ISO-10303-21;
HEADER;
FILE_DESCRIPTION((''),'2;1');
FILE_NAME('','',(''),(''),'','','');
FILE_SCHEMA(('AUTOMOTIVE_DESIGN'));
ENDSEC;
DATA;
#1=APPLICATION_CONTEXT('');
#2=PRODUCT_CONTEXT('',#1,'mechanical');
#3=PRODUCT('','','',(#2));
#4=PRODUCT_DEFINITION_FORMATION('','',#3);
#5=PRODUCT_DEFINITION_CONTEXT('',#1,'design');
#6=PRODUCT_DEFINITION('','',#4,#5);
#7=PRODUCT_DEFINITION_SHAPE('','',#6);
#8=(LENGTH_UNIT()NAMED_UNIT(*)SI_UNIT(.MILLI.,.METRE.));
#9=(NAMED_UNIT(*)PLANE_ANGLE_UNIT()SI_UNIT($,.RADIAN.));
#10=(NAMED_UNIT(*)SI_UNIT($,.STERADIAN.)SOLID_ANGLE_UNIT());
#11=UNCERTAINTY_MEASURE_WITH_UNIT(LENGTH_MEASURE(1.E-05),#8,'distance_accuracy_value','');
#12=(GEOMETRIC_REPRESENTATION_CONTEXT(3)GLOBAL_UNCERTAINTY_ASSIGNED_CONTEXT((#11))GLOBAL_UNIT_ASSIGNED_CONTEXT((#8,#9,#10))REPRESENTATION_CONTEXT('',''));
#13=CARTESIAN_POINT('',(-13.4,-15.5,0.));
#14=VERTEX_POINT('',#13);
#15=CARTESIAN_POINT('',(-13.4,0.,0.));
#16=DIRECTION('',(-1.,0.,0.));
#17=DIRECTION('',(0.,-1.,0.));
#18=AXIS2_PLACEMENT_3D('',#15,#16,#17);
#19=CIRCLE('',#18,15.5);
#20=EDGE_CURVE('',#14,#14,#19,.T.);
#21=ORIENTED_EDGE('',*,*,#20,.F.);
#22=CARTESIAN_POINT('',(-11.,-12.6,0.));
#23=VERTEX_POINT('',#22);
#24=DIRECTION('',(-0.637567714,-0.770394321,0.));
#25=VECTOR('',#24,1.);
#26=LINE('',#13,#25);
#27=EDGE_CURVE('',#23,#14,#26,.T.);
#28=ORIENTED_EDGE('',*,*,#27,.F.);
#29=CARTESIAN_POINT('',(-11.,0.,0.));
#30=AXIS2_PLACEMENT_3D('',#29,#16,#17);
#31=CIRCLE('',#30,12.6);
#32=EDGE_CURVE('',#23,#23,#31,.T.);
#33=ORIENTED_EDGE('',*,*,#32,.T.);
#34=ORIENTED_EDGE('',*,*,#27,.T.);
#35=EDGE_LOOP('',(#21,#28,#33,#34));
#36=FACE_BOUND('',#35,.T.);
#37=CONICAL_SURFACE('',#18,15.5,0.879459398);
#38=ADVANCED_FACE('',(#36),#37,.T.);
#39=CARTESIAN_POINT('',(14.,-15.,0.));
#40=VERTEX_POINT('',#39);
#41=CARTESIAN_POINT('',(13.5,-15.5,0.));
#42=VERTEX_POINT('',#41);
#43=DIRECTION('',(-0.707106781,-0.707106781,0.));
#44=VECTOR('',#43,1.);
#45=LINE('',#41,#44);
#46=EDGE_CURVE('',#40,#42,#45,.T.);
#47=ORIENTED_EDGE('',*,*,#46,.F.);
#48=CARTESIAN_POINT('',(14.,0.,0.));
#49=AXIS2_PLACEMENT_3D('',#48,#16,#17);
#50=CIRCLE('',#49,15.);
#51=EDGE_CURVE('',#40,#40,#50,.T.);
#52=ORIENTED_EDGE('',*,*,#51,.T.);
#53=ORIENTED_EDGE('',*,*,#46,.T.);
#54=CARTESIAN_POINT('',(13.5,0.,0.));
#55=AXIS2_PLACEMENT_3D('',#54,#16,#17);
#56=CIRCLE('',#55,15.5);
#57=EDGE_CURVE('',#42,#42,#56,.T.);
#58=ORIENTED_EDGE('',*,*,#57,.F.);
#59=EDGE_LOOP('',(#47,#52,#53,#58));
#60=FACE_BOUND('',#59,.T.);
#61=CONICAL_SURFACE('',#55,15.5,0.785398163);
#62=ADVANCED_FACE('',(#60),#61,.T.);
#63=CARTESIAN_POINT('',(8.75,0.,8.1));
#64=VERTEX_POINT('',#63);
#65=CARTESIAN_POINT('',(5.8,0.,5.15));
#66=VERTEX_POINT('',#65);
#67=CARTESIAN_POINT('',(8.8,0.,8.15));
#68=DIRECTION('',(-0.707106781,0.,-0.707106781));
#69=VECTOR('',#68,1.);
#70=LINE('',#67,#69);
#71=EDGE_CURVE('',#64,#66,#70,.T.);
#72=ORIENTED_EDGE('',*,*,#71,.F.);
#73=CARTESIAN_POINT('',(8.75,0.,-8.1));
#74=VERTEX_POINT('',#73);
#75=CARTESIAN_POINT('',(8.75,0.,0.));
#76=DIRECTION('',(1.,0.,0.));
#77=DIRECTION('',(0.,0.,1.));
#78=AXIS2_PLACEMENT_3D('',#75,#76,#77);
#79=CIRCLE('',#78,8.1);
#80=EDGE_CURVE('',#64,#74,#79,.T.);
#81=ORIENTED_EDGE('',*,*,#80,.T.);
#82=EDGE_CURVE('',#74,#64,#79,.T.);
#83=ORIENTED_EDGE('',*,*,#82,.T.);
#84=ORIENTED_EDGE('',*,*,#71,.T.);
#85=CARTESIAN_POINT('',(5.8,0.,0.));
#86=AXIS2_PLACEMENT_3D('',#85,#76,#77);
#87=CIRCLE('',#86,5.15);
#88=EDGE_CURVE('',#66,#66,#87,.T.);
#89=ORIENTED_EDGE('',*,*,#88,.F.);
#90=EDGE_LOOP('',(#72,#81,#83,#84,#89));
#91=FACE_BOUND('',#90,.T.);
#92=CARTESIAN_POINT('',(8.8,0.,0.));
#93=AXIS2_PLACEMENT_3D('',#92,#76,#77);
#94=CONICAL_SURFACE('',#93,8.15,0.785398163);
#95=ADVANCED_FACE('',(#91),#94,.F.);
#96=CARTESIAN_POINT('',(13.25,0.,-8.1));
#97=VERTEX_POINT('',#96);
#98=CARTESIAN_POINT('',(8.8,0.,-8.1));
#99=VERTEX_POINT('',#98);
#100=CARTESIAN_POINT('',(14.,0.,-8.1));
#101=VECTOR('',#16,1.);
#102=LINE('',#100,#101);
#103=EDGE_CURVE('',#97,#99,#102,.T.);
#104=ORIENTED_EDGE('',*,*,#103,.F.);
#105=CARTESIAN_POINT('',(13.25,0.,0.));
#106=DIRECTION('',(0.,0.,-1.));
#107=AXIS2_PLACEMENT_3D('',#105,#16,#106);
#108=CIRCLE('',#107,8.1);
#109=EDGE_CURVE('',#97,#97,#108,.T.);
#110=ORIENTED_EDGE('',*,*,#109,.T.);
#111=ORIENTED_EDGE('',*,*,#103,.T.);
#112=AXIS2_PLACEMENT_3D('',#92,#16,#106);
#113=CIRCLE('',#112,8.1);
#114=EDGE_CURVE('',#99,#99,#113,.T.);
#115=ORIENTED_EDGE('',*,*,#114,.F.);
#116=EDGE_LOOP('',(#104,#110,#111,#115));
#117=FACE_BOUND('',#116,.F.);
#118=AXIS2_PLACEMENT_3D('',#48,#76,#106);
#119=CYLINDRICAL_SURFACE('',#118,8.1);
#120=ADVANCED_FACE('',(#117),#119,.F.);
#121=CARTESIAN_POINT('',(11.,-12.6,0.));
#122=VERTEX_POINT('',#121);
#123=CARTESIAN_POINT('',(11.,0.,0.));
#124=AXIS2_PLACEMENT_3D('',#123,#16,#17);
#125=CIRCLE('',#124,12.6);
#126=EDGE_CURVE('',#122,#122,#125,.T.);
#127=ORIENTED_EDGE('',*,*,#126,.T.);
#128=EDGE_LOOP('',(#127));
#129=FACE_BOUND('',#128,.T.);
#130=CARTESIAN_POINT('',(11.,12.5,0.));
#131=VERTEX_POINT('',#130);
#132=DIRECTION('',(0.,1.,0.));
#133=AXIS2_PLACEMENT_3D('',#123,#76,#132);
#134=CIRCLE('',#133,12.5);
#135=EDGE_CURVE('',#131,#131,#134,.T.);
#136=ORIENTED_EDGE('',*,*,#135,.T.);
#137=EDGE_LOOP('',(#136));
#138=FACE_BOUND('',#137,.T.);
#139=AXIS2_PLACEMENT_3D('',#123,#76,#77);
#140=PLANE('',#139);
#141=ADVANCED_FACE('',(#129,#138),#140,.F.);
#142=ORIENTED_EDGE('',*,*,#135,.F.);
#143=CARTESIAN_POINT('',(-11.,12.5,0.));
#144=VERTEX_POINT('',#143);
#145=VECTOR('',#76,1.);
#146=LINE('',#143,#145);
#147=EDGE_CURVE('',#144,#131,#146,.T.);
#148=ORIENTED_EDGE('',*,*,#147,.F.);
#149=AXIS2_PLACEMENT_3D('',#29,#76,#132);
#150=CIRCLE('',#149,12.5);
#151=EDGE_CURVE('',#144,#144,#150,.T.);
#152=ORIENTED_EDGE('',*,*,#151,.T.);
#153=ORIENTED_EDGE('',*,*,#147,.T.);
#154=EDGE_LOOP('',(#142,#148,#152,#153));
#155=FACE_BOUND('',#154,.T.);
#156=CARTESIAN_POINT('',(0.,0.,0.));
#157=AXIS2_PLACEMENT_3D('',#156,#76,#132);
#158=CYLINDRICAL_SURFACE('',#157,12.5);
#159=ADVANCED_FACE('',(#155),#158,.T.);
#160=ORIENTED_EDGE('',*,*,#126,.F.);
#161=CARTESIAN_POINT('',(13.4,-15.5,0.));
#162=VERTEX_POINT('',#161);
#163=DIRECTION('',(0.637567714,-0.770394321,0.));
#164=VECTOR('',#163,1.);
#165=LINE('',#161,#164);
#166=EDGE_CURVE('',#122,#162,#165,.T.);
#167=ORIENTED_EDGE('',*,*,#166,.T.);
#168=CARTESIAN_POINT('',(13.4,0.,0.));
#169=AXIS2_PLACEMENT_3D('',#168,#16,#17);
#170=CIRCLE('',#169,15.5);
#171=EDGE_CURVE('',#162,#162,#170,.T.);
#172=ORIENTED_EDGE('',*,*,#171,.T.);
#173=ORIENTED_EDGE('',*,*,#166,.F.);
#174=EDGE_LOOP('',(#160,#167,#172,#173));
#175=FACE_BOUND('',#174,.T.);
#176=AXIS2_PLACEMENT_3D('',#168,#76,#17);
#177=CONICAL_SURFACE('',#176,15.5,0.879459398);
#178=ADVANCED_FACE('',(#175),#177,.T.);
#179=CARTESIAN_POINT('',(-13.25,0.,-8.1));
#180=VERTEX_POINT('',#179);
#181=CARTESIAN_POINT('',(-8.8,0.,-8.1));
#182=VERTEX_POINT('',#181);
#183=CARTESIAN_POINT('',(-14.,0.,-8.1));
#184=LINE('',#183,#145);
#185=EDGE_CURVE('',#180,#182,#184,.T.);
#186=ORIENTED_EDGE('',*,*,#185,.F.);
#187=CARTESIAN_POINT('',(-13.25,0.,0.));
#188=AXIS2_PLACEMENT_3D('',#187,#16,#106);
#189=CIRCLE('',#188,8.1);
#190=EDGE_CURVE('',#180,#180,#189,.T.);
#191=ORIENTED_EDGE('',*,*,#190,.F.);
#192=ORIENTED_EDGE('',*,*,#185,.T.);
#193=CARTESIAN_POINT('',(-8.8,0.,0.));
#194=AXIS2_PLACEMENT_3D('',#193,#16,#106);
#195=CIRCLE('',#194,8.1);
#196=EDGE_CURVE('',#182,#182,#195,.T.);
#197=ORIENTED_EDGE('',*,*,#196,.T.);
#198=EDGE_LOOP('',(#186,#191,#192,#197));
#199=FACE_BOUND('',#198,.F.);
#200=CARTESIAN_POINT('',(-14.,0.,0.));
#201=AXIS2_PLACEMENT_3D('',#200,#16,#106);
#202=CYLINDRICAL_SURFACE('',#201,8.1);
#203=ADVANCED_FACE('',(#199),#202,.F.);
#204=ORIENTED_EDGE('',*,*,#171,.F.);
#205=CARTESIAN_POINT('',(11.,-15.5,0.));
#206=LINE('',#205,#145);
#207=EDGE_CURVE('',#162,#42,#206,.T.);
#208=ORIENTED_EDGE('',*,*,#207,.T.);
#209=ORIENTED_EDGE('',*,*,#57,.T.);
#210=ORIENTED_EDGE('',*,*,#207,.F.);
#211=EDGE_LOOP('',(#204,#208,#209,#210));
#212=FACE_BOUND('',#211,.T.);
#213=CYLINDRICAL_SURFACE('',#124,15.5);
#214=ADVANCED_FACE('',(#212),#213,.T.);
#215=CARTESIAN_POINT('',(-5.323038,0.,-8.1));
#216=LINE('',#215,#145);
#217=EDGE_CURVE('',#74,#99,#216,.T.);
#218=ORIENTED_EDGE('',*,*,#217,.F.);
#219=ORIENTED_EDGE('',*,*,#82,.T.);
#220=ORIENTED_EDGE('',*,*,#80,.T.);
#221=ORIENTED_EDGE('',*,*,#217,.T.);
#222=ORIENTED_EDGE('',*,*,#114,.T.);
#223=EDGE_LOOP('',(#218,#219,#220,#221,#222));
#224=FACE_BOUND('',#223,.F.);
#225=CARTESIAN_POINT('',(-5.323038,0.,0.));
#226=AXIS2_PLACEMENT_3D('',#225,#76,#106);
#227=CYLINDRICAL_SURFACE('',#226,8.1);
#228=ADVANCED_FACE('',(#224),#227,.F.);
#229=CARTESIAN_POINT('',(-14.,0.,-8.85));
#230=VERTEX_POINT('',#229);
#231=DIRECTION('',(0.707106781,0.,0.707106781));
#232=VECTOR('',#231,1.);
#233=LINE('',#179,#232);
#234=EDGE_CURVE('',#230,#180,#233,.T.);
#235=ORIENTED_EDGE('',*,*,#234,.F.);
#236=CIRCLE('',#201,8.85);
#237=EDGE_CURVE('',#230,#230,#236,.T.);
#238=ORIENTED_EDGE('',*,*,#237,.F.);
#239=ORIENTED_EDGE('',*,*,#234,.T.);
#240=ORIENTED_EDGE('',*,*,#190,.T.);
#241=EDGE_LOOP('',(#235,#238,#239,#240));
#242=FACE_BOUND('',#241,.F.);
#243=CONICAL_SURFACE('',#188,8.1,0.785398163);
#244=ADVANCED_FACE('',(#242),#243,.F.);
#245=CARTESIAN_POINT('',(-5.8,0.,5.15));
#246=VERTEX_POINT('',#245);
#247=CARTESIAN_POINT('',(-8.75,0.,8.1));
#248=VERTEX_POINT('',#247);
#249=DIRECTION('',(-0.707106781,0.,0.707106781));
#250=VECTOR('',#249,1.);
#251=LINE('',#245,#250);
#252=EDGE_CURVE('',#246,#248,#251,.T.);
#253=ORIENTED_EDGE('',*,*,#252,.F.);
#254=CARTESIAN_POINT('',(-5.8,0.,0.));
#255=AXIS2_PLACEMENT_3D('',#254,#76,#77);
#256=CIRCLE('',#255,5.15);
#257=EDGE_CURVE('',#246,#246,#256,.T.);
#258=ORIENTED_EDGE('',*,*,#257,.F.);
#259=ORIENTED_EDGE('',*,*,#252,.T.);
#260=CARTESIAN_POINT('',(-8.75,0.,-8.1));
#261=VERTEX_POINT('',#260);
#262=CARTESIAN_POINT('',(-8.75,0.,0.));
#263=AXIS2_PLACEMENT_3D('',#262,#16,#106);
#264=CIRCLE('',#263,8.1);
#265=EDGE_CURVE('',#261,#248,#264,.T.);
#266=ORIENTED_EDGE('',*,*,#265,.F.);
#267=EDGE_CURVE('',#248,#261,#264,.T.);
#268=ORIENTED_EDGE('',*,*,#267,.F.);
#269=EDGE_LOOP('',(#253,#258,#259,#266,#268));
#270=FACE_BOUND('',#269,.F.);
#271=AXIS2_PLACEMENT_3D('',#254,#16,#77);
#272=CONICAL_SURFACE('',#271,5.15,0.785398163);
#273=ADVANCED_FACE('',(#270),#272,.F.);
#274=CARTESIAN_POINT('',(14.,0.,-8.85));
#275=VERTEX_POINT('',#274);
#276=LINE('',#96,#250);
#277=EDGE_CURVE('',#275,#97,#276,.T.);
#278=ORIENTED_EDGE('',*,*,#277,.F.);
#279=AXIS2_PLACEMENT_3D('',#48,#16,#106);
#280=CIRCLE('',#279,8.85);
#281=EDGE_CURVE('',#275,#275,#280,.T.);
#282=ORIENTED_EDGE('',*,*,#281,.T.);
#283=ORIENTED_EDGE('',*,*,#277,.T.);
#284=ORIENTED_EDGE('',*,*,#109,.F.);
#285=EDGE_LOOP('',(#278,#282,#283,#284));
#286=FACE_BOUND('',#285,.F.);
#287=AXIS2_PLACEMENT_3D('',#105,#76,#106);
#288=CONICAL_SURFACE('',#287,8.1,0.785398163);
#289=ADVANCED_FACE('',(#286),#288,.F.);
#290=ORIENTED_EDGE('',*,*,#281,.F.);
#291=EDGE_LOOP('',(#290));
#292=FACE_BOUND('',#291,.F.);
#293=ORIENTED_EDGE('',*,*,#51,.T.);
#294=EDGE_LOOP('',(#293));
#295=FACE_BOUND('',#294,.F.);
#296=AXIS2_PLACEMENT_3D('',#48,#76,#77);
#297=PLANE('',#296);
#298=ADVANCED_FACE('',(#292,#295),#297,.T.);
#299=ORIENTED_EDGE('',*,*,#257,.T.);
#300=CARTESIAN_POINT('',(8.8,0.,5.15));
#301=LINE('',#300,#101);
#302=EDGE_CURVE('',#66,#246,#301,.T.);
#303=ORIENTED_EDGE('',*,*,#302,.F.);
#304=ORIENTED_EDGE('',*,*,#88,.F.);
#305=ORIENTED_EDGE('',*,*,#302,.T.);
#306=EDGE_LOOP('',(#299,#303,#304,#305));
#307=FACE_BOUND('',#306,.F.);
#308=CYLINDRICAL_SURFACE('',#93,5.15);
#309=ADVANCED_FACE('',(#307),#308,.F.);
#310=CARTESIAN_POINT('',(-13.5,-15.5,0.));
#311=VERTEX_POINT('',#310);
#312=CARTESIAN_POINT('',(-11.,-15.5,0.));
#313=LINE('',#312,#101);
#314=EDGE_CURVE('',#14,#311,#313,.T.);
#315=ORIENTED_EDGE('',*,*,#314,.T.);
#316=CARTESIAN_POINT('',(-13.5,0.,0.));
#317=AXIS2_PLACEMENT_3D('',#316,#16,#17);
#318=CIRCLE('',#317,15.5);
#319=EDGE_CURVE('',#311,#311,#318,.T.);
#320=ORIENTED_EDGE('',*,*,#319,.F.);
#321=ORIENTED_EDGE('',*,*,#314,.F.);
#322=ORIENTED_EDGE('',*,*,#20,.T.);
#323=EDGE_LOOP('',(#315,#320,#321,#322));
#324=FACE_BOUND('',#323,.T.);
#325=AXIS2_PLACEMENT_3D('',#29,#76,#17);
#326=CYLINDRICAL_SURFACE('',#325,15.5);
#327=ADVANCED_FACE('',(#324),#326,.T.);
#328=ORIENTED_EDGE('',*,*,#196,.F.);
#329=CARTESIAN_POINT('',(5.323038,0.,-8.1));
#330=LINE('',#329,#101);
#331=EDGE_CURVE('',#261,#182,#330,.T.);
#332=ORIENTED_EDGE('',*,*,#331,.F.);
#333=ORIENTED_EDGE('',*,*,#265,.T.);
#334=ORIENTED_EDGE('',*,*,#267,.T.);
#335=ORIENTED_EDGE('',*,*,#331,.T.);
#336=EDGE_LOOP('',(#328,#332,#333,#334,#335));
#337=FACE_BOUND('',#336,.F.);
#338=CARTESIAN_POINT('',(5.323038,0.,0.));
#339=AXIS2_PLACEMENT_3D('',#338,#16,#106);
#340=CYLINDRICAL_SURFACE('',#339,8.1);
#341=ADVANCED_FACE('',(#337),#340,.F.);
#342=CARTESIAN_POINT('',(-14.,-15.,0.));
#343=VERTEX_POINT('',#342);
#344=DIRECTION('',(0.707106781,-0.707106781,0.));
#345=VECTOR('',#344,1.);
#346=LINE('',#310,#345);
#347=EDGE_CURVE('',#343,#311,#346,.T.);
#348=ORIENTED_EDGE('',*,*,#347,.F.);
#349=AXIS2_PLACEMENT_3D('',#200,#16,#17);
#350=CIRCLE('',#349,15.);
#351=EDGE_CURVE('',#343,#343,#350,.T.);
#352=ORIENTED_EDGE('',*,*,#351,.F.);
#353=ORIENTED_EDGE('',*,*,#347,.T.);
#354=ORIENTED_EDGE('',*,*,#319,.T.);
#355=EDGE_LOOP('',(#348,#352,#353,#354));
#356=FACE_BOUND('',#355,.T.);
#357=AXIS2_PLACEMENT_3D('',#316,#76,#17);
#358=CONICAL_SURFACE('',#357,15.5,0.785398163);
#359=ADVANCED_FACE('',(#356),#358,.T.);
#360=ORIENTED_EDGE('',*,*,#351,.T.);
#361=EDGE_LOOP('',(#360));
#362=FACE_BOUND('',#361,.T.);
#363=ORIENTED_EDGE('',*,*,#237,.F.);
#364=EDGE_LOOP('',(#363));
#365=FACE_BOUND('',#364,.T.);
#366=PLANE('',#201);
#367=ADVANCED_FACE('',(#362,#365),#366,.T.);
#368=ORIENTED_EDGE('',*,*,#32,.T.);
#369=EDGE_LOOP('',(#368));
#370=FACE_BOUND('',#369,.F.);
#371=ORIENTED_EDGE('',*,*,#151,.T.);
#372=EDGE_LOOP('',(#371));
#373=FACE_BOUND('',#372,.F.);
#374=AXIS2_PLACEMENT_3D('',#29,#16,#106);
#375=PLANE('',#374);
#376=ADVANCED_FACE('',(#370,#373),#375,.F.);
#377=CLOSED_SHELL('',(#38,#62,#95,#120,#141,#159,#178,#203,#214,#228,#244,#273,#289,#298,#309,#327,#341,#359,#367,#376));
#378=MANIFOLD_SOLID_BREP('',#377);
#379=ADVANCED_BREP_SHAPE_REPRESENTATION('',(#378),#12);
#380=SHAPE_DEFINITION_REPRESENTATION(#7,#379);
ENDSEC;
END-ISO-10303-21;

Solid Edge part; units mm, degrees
sketch "Sketch1" plane through (0, 0, 0) normal (1, 0, 0) x (0, 1, 0)
  circle A0 centre (0, 0) radius 12.5
extrude "Extrusionsausprägung_15" add sketch "Sketch1" along normal mid plane 22
sketch "Sketch2" plane through (-11, 0, 0) normal (-1, 0, 0) x (0, -1, 0)
  circle A0 centre (0, 0) radius 15.5
extrude "Extrusionsausprägung_16" add sketch "Sketch2" along normal blind 3
chamfer "Fase_13" distance 2.9 distance2 2.4 1 edges at (-11, 15.5, 0) measured on face at (-11, 10.0233, 10.6433)
sketch "Sketch3" plane through (-14, 0, 0) normal (-1, 0, 0) x (0, 0, -1)
  circle A0 centre (0, 0) radius 8.1
extrude "Extrusionsausschnitt_23" cut sketch "Sketch3" against normal blind 5.2
chamfer "Fase_10" distance 0.75 angle 45 1 edges at (-14, 0, 8.1)
chamfer "Fase_11" distance 0.5 angle 45 1 edges at (-14, 15.5, 0)
mirror "Mirror1" about plane through (0, 0, 0) normal (1, 0, 0) of "Extrusionsausprägung_16", "Extrusionsausschnitt_23", "Fase_10", "Fase_11", "Fase_13"
sketch "Sketch4" plane through (8.8, 0, 0) normal (1, 0, 0) x (0, 0, 1)
  circle A0 centre (0, 0) radius 5.15
extrude "Extrusionsausschnitt_24" cut sketch "Sketch4" against normal blind 20
chamfer "Fase_12" distance 3 angle 45 2 edges at (8.8, 0, -5.15) (-8.8, -5.15, 0)
